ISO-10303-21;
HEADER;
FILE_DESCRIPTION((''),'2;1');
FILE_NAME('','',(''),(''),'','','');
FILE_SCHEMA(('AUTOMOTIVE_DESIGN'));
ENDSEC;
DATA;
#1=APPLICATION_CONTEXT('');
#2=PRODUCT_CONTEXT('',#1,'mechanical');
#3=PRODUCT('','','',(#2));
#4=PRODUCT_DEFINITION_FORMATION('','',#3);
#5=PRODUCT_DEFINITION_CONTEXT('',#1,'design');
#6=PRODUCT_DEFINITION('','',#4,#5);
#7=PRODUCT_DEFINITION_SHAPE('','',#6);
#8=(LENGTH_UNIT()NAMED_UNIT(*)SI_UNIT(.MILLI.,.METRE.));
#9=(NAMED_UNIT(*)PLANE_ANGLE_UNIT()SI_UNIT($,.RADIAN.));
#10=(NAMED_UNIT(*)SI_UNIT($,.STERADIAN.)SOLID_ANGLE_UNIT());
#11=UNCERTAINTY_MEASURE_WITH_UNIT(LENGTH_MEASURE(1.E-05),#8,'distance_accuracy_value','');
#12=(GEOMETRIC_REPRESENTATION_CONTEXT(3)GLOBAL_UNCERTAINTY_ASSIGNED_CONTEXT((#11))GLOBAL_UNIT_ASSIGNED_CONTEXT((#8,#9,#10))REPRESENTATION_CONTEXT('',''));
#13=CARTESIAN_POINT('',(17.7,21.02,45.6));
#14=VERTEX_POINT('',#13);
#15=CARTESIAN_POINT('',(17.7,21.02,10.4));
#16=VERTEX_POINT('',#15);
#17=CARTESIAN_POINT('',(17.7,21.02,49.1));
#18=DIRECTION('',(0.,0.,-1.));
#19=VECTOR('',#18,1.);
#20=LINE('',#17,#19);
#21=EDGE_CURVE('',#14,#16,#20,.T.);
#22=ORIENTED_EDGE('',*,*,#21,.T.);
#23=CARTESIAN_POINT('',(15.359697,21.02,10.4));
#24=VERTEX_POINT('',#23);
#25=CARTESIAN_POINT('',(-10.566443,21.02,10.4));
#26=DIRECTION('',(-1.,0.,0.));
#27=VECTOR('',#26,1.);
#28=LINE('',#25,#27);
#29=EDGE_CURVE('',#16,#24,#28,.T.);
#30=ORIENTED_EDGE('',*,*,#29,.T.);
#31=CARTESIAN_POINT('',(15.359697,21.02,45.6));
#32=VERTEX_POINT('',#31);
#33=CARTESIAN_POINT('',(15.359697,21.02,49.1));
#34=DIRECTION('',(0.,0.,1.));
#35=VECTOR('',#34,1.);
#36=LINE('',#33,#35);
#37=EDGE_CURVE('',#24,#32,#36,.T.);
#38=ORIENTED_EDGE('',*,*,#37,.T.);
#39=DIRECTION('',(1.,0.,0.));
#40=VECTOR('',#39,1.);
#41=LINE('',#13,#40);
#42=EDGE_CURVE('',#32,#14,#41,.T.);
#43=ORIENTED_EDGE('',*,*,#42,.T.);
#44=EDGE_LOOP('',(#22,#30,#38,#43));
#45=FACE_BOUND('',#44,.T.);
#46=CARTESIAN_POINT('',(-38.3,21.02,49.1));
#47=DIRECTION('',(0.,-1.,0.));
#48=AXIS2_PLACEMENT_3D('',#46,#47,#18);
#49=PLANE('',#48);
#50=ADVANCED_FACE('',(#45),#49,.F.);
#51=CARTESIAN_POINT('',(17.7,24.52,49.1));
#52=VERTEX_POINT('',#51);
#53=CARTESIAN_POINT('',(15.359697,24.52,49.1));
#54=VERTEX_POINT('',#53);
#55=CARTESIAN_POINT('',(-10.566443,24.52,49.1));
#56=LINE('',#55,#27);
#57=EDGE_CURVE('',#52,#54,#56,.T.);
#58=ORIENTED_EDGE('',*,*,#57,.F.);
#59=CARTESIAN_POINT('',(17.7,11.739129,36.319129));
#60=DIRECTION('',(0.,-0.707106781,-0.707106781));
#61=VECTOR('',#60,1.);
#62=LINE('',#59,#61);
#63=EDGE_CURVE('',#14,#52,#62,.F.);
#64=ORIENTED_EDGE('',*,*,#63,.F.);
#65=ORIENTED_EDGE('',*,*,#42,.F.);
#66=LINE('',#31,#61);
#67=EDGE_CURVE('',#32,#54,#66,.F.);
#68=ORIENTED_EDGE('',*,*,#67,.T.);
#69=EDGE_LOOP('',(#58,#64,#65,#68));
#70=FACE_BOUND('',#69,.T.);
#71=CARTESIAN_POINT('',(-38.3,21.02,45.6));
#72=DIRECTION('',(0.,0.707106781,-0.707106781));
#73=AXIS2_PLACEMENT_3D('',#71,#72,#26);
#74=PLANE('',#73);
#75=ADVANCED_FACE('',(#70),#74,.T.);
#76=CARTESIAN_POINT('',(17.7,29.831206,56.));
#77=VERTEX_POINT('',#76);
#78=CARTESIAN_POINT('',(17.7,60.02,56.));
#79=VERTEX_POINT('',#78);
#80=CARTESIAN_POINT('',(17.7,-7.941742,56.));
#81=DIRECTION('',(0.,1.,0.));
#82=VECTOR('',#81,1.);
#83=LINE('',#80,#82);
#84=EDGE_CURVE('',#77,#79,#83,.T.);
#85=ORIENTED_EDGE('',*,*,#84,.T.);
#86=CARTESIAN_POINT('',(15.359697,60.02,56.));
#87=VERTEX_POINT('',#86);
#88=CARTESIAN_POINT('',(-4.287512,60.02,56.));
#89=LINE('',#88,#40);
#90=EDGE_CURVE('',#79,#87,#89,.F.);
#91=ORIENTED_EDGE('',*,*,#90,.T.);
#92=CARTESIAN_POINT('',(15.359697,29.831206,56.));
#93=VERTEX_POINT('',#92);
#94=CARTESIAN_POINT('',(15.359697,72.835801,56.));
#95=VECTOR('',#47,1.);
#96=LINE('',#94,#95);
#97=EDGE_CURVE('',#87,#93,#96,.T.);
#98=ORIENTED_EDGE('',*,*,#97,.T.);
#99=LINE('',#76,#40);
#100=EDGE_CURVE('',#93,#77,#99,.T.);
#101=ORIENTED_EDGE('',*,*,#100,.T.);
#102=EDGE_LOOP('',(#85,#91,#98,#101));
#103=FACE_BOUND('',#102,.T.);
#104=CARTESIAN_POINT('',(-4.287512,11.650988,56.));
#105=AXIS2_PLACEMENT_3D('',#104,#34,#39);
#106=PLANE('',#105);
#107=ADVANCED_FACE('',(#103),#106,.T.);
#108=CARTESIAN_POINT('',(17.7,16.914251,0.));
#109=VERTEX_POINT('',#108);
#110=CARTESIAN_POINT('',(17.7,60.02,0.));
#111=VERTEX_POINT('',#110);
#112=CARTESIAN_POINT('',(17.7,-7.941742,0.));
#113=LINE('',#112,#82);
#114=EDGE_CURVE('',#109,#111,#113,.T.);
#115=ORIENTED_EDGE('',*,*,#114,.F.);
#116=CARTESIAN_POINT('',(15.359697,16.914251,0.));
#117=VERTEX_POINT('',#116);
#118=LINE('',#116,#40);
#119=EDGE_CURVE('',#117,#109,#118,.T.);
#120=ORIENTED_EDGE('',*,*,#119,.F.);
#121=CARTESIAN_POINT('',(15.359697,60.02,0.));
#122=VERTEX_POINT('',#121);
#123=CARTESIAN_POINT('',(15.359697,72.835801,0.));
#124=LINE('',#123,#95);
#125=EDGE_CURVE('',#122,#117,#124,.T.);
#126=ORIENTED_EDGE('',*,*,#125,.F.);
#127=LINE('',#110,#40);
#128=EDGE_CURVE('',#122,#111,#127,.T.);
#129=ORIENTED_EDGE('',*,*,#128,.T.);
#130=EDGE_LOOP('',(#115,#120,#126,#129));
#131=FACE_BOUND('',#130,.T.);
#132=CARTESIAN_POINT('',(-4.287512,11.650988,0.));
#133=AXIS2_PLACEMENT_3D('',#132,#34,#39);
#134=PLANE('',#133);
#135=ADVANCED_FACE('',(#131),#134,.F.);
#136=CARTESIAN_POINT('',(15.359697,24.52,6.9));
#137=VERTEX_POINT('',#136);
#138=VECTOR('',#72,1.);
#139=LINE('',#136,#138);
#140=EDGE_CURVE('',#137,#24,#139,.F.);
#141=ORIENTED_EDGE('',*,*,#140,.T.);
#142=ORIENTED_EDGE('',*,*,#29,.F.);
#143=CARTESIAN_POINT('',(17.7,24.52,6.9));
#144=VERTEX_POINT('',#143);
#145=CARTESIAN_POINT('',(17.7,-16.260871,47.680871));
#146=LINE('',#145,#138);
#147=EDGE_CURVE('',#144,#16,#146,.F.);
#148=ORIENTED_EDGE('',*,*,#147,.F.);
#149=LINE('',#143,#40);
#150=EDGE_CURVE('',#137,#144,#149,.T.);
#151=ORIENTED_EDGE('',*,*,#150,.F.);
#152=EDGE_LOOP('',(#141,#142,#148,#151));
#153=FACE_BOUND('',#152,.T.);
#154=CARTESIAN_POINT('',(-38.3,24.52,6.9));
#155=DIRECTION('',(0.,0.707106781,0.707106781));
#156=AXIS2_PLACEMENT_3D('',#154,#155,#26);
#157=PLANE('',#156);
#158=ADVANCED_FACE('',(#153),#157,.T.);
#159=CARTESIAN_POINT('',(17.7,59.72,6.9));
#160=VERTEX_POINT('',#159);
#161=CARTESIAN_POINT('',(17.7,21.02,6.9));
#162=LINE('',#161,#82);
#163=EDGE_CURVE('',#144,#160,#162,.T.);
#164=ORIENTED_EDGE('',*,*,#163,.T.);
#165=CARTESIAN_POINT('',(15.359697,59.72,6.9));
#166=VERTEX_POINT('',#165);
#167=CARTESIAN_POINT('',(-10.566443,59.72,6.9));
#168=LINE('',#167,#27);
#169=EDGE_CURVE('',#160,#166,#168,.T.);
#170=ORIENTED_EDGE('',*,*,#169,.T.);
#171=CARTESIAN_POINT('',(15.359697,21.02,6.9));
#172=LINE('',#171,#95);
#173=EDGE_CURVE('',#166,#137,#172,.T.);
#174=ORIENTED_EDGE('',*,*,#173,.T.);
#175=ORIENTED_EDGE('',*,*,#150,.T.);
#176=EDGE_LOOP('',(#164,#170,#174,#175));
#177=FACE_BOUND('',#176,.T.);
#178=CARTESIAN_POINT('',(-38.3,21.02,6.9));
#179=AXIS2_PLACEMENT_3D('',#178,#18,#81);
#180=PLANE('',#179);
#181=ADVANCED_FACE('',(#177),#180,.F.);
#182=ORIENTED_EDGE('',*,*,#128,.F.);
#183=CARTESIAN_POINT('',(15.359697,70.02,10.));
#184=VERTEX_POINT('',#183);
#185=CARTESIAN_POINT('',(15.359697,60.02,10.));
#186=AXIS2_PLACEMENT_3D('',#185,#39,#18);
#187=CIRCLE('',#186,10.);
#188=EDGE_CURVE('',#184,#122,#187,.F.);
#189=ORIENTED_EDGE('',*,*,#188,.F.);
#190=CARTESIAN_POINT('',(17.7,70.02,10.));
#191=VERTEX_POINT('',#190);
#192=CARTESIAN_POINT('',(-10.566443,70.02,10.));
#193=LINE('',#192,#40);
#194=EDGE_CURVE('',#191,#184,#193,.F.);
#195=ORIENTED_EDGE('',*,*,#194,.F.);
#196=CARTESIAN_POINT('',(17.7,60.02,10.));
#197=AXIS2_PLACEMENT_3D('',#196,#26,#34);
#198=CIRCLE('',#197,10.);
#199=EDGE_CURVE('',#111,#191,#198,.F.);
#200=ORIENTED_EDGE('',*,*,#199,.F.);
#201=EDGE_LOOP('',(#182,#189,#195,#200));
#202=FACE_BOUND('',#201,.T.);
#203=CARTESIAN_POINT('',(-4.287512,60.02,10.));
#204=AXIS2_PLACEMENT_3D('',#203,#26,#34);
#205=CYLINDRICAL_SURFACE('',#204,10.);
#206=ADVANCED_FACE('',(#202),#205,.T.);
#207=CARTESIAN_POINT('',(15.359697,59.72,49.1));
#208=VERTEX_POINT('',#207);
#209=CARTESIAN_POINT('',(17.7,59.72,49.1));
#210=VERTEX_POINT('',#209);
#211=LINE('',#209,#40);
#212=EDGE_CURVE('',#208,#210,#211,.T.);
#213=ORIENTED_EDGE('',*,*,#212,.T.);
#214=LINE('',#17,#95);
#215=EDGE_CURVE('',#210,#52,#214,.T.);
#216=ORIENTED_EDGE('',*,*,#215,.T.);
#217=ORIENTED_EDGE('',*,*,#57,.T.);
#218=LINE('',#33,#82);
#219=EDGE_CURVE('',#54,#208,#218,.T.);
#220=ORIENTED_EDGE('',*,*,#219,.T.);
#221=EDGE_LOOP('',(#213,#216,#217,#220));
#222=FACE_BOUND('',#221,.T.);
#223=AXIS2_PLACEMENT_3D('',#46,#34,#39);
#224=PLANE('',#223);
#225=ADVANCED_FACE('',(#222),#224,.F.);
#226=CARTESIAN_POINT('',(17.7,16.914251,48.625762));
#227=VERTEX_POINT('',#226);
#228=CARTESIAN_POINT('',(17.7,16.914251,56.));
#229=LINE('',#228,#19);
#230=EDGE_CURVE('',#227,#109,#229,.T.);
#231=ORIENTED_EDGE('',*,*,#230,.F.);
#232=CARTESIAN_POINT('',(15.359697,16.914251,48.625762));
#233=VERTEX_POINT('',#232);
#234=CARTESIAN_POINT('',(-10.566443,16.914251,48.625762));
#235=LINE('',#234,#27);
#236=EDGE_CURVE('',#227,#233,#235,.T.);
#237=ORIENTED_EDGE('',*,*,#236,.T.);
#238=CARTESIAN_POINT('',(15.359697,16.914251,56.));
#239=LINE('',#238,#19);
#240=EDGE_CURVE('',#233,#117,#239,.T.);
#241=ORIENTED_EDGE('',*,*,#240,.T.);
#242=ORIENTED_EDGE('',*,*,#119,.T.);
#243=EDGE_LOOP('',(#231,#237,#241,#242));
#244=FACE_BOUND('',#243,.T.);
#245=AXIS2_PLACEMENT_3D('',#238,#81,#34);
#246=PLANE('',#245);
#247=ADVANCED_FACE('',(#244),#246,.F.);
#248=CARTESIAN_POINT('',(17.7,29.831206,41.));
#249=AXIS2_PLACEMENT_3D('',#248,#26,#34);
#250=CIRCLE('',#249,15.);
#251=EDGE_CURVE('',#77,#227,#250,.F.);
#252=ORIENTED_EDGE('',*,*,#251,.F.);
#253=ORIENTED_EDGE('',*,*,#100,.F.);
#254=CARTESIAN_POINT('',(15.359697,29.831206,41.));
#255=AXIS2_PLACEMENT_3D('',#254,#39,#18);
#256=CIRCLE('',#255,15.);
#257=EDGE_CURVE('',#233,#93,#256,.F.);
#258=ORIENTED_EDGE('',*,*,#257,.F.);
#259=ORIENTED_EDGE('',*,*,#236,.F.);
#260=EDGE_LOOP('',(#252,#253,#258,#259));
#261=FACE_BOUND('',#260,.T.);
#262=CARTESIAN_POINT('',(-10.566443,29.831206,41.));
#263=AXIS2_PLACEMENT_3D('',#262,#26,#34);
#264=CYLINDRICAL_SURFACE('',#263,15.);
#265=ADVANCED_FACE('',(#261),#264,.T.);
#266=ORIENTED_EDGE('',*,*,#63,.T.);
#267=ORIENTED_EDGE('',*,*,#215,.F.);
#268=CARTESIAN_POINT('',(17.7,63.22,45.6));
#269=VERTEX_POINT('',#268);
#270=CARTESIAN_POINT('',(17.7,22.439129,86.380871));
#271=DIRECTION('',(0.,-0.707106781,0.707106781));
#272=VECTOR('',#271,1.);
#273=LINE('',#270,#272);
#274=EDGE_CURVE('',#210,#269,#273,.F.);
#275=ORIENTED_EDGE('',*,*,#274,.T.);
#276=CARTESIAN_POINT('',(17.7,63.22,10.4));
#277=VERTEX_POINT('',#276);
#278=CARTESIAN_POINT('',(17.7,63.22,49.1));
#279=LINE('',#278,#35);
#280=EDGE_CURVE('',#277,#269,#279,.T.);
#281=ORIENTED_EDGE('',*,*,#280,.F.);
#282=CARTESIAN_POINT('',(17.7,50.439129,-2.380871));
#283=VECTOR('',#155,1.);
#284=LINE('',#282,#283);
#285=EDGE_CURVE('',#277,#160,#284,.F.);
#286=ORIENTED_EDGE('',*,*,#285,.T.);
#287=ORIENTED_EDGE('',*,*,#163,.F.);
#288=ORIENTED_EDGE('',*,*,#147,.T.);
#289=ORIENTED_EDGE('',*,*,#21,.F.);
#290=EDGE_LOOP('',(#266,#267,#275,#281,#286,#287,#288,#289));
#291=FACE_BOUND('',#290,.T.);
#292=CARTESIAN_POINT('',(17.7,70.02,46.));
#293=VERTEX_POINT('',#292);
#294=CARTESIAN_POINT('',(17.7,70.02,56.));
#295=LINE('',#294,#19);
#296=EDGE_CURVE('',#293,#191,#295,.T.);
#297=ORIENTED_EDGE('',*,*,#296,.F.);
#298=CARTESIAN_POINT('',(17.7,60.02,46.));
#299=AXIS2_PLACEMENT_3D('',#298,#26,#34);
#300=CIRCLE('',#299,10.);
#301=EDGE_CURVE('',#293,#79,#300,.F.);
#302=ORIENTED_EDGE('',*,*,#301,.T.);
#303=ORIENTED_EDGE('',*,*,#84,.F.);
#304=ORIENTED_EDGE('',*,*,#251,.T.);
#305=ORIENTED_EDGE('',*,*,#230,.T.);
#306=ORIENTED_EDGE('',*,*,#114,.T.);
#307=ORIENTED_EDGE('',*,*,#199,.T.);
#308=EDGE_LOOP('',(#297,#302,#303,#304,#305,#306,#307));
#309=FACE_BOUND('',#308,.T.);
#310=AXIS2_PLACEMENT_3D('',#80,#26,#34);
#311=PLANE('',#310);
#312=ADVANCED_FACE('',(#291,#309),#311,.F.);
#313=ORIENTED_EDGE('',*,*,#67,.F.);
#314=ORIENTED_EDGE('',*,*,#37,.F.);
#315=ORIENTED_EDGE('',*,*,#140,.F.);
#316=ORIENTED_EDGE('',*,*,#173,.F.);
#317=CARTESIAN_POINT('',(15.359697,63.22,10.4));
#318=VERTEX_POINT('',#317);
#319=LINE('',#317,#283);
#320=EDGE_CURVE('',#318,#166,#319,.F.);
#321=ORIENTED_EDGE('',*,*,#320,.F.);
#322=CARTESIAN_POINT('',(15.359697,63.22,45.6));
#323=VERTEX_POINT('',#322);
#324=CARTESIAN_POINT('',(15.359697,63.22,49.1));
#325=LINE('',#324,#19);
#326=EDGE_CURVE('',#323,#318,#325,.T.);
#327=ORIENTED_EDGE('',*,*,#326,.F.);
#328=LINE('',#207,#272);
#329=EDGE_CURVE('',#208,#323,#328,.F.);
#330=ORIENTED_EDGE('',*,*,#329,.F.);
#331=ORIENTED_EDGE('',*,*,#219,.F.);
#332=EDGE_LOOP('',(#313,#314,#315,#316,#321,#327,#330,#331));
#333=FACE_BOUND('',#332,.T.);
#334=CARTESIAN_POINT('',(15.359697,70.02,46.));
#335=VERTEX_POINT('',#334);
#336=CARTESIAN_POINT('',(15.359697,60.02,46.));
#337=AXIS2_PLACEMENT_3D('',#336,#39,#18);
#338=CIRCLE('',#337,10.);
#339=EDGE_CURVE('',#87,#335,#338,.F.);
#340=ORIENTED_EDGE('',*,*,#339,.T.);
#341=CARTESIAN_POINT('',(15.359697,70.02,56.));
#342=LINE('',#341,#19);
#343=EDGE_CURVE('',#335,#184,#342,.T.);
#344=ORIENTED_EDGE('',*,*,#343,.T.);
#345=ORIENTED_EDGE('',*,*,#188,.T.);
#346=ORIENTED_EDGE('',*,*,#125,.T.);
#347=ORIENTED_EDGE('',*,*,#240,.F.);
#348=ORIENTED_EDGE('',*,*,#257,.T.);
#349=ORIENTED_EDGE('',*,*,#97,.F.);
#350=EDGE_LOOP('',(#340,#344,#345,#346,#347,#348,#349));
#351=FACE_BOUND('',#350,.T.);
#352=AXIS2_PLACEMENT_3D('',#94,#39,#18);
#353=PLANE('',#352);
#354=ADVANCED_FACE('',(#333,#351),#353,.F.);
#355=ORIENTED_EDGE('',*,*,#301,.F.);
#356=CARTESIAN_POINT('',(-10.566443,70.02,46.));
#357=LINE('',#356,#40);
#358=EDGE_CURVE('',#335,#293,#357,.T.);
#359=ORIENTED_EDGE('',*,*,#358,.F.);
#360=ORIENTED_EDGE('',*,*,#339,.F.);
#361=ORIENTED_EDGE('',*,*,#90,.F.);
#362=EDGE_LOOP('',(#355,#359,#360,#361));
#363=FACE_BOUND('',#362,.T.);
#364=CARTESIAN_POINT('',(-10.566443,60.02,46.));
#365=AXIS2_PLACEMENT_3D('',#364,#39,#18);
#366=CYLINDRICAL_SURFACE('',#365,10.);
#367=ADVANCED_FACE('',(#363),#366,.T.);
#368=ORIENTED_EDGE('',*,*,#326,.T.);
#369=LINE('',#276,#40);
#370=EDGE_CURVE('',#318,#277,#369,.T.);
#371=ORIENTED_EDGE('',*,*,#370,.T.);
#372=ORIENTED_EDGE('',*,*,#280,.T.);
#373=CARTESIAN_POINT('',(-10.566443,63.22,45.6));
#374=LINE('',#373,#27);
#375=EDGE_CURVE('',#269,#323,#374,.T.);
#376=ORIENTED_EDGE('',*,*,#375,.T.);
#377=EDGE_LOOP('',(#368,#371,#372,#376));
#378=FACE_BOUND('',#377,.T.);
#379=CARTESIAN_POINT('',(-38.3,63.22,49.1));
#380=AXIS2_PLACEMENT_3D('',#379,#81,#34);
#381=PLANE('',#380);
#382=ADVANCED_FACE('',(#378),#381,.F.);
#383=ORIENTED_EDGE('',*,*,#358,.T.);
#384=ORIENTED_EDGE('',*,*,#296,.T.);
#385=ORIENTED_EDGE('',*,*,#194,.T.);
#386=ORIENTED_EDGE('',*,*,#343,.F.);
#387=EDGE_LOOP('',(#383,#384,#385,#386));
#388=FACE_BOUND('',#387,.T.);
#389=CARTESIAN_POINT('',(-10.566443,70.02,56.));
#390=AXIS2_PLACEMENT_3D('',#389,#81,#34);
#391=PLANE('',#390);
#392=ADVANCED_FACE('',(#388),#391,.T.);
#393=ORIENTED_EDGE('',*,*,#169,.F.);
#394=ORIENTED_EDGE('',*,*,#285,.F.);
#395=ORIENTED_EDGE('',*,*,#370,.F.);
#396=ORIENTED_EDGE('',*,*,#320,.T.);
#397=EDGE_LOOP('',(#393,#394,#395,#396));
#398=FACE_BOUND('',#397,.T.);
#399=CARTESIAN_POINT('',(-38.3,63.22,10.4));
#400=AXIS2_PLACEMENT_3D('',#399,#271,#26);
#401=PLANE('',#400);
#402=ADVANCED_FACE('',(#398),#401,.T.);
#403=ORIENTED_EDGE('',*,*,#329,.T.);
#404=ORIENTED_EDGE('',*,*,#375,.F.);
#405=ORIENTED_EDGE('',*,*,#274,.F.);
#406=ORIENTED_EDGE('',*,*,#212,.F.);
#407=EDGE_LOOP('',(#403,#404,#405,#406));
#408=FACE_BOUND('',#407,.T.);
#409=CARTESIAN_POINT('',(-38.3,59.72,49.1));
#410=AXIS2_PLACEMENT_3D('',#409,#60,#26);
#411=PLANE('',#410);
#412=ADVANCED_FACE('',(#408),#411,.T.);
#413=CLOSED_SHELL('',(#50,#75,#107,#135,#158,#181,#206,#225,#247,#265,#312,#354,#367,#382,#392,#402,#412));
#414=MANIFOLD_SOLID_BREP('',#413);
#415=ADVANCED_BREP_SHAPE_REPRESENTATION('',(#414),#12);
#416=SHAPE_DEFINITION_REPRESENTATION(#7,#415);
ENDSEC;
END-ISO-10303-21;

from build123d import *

# Parameters (mm, degrees)
BOSS_EXTRUDE1_DEPTH = 56
SKETCH14_W          = 42.2
SKETCH14_H          = 42.2
CUT_EXTRUDE1_DEPTH  = 56
CHAMFER1_SIZE       = 3.5
FILLET1_R           = 10
SKETCH16_W          = 12.4
SKETCH16_H          = 23
CUT_EXTRUDE3_DEPTH  = 95.009532523
CUT_EXTRUDE4_REACH  = 93.39
SKETCH17_W          = 15.453545708
SKETCH17_H          = 18
FILLET4_R           = 15
CUT_EXTRUDE5_DEPTH  = 92.389771857


with BuildPart() as part:
    # Sketch1 → Boss-Extrude1 (new body)
    with BuildSketch(Plane.XY):
        with BuildLine():
            Line((13.02, -7.9417418), (17.7, -7.9417418))
            Line((17.7, -7.9417418), (17.7, 70.02))
            Line((17.7, 70.02), (-10.566443095, 70.02))
            Line((-10.566443095, 70.02), (-10.566443095, 13.02))
            Line((-10.566443095, 13.02), (-5.317126718, 13.02))
            Line((-5.317126718, 13.02), (-4.287512407, 13.02))
            ThreePointArc((-4.287512407, 13.02), (-3.319474451, 12.619025549), (-2.9185, 11.650987593))
            Line((-2.9185, 11.650987593), (-2.9185, 11.539212407))
            ThreePointArc((-2.9185, 11.539212407), (-3.319474451, 10.571174451), (-4.287512407, 10.1702))
            Line((-4.287512407, 10.1702), (-6.476788598, 10.1702))
            ThreePointArc((-6.476788598, 10.1702), (-7.136510935, 9.729114651), (-6.981020848, 8.950903446))
            Line((-6.981020848, 8.950903446), (-3.672257405, 5.649701928))
            ThreePointArc((-3.672257405, 5.649701928), (-2.746830644, 5.032499411), (-1.655778399, 4.8158))
            Line((-1.655778399, 4.8158), (1.655778399, 4.8158))
            ThreePointArc((1.655778399, 4.8158), (2.746830644, 5.032499411), (3.672257405, 5.649701928))
            Line((3.672257405, 5.649701928), (6.981020848, 8.950903446))
            ThreePointArc((6.981020848, 8.950903446), (7.136510935, 9.729114651), (6.476788598, 10.1702))
            Line((6.476788598, 10.1702), (4.287512407, 10.1702))
            ThreePointArc((4.287512407, 10.1702), (3.319474451, 10.571174451), (2.9185, 11.539212407))
            Line((2.9185, 11.539212407), (2.9185, 11.650987593))
            ThreePointArc((2.9185, 11.650987593), (3.319474451, 12.619025549), (4.287512407, 13.02))
            Line((4.287512407, 13.02), (6.332886163, 13.02))
            Line((6.332886163, 13.02), (10.562594215, 13.019824354))
            ThreePointArc((10.562594215, 13.019824354), (12.303594776, 12.313982883), (13.019956614, 10.577284622))
            Line((13.019956614, 10.577284622), (13.02, 4.287469289))
            ThreePointArc((13.02, 4.287469289), (12.619025549, 3.319431332), (11.650987593, 2.918456882))
            Line((11.650987593, 2.918456882), (11.539212407, 2.918456882))
            ThreePointArc((11.539212407, 2.918456882), (10.571174451, 3.319431332), (10.1702, 4.287469289))
            Line((10.1702, 4.287469289), (10.1702, 6.402089023))
            ThreePointArc((10.1702, 6.402089023), (9.733877283, 7.055496588), (8.963146507, 6.90287605))
            Line((8.963146507, 6.90287605), (5.667020993, 3.614283579))
            ThreePointArc((5.667020993, 3.614283579), (5.046449321, 2.687255303), (4.8285, 1.593185507))
            Line((4.8285, 1.593185507), (4.8285, -1.593185507))
            ThreePointArc((4.8285, -1.593185507), (5.046449321, -2.687255303), (5.667020993, -3.614283579))
            Line((5.667020993, -3.614283579), (8.963146507, -6.90287605))
            ThreePointArc((8.963146507, -6.90287605), (9.733877283, -7.055496588), (10.1702, -6.402089023))
            Line((10.1702, -6.402089023), (10.1702, -4.287469289))
            ThreePointArc((10.1702, -4.287469289), (10.571174451, -3.319431332), (11.539212407, -2.918456882))
            Line((11.539212407, -2.918456882), (11.650987593, -2.918456882))
            ThreePointArc((11.650987593, -2.918456882), (12.619025549, -3.319431332), (13.02, -4.287469289))
            Line((13.02, -4.287469289), (13.02, -5.3170836))
            Line((13.02, -5.3170836), (13.02, -7.9417418))
        make_face()
    extrude(amount=BOSS_EXTRUDE1_DEPTH)

    # Sketch14 → Cut-Extrude1 (cut)
    with BuildSketch(Plane(origin=(17.7, 0, 0), x_dir=(0, 0, -1), z_dir=(1, 0, 0))):
        with Locations((-28, 42.12)):
            Rectangle(SKETCH14_W, SKETCH14_H)
    extrude(amount=-CUT_EXTRUDE1_DEPTH, mode=Mode.SUBTRACT)

    # Chamfer1
    chamfer1_edges = [part.edges().sort_by_distance(p)[0] for p in [
        (3.566778452, 21.02, 49.1),
        (3.566778452, 63.22, 49.1),
        (3.566778452, 63.22, 6.9),
        (3.566778452, 21.02, 6.9),
    ]]
    chamfer(chamfer1_edges, length=CHAMFER1_SIZE)

    # Fillet1
    fillet1_edges = [part.edges().sort_by_distance(p)[0] for p in [
        (3.566778452, 70.02, 56),
        (3.566778452, 70.02, 0),
    ]]
    fillet(fillet1_edges, radius=FILLET1_R)

    # Sketch16 → Cut-Extrude3 (cut, through all)
    with BuildSketch(Plane(origin=(17.7, 0, 0), x_dir=(0, 0, -1), z_dir=(1, 0, 0))):
        with Locations((-49.8, 3.5582582)):
            Rectangle(SKETCH16_W, SKETCH16_H)
    extrude(amount=-CUT_EXTRUDE3_DEPTH, mode=Mode.SUBTRACT)

    # Sketch17 → Cut-Extrude4 (cut, up to next)
    with BuildSketch(Plane.XY.offset(56), mode=Mode.PRIVATE) as cut_extrude4_sk1:
        with Locations((-5.893215949, 42.12)):
            Rectangle(SKETCH17_W, SKETCH17_H)
    cut_extrude4_tool1 = extrude(cut_extrude4_sk1.sketch, amount=-CUT_EXTRUDE4_REACH, mode=Mode.PRIVATE) & part.part
    add(cut_extrude4_tool1.solids().sort_by_distance((-5.893216, 42.12, 56))[0], mode=Mode.SUBTRACT)

    # Fillet4
    # the kernel refuses this fillet: 15 mm, written as the material it takes off along each edge
    with BuildSketch(Plane(origin=(54.632370625, 15.0582582, 56), x_dir=(0, 1, 0), z_dir=(-1, 0, 0))) as fillet4_piece_1:
        with BuildLine():
            CenterArc((14.77294825, 15), FILLET4_R, 189.98168298, 80.01831702)
            Line((0, 12.4), (-0.295458965, 12.348))
            ThreePointArc((-0.295458965, 12.348), (-0.3, 6.2), (-0.3, 0))
            Line((-0.3, 0), (0, -0.3))
            Line((0, -0.3), (14.77294825, -0.3))
            Line((14.77294825, -0.3), (14.77294825, 0))
        make_face()
    extrude(amount=102.131184346, mode=Mode.SUBTRACT)

    # Sketch18 → Cut-Extrude5 (cut, through all)
    with BuildSketch(Plane(origin=(0, 0, 0), x_dir=(-1, 0, 0), z_dir=(0, 0, -1))):
        Polygon((-15.359697471, 16.914250509), (-37.368077548, 16.914250509), (-37.368077548, -12.201573967), (-15.359697471, -12.201573967), (14.082488106, -12.201573967), (14.082488106, 72.835801267), (-15.359697471, 72.835801267), align=None)
    extrude(amount=-CUT_EXTRUDE5_DEPTH, mode=Mode.SUBTRACT)


solid = part.part
